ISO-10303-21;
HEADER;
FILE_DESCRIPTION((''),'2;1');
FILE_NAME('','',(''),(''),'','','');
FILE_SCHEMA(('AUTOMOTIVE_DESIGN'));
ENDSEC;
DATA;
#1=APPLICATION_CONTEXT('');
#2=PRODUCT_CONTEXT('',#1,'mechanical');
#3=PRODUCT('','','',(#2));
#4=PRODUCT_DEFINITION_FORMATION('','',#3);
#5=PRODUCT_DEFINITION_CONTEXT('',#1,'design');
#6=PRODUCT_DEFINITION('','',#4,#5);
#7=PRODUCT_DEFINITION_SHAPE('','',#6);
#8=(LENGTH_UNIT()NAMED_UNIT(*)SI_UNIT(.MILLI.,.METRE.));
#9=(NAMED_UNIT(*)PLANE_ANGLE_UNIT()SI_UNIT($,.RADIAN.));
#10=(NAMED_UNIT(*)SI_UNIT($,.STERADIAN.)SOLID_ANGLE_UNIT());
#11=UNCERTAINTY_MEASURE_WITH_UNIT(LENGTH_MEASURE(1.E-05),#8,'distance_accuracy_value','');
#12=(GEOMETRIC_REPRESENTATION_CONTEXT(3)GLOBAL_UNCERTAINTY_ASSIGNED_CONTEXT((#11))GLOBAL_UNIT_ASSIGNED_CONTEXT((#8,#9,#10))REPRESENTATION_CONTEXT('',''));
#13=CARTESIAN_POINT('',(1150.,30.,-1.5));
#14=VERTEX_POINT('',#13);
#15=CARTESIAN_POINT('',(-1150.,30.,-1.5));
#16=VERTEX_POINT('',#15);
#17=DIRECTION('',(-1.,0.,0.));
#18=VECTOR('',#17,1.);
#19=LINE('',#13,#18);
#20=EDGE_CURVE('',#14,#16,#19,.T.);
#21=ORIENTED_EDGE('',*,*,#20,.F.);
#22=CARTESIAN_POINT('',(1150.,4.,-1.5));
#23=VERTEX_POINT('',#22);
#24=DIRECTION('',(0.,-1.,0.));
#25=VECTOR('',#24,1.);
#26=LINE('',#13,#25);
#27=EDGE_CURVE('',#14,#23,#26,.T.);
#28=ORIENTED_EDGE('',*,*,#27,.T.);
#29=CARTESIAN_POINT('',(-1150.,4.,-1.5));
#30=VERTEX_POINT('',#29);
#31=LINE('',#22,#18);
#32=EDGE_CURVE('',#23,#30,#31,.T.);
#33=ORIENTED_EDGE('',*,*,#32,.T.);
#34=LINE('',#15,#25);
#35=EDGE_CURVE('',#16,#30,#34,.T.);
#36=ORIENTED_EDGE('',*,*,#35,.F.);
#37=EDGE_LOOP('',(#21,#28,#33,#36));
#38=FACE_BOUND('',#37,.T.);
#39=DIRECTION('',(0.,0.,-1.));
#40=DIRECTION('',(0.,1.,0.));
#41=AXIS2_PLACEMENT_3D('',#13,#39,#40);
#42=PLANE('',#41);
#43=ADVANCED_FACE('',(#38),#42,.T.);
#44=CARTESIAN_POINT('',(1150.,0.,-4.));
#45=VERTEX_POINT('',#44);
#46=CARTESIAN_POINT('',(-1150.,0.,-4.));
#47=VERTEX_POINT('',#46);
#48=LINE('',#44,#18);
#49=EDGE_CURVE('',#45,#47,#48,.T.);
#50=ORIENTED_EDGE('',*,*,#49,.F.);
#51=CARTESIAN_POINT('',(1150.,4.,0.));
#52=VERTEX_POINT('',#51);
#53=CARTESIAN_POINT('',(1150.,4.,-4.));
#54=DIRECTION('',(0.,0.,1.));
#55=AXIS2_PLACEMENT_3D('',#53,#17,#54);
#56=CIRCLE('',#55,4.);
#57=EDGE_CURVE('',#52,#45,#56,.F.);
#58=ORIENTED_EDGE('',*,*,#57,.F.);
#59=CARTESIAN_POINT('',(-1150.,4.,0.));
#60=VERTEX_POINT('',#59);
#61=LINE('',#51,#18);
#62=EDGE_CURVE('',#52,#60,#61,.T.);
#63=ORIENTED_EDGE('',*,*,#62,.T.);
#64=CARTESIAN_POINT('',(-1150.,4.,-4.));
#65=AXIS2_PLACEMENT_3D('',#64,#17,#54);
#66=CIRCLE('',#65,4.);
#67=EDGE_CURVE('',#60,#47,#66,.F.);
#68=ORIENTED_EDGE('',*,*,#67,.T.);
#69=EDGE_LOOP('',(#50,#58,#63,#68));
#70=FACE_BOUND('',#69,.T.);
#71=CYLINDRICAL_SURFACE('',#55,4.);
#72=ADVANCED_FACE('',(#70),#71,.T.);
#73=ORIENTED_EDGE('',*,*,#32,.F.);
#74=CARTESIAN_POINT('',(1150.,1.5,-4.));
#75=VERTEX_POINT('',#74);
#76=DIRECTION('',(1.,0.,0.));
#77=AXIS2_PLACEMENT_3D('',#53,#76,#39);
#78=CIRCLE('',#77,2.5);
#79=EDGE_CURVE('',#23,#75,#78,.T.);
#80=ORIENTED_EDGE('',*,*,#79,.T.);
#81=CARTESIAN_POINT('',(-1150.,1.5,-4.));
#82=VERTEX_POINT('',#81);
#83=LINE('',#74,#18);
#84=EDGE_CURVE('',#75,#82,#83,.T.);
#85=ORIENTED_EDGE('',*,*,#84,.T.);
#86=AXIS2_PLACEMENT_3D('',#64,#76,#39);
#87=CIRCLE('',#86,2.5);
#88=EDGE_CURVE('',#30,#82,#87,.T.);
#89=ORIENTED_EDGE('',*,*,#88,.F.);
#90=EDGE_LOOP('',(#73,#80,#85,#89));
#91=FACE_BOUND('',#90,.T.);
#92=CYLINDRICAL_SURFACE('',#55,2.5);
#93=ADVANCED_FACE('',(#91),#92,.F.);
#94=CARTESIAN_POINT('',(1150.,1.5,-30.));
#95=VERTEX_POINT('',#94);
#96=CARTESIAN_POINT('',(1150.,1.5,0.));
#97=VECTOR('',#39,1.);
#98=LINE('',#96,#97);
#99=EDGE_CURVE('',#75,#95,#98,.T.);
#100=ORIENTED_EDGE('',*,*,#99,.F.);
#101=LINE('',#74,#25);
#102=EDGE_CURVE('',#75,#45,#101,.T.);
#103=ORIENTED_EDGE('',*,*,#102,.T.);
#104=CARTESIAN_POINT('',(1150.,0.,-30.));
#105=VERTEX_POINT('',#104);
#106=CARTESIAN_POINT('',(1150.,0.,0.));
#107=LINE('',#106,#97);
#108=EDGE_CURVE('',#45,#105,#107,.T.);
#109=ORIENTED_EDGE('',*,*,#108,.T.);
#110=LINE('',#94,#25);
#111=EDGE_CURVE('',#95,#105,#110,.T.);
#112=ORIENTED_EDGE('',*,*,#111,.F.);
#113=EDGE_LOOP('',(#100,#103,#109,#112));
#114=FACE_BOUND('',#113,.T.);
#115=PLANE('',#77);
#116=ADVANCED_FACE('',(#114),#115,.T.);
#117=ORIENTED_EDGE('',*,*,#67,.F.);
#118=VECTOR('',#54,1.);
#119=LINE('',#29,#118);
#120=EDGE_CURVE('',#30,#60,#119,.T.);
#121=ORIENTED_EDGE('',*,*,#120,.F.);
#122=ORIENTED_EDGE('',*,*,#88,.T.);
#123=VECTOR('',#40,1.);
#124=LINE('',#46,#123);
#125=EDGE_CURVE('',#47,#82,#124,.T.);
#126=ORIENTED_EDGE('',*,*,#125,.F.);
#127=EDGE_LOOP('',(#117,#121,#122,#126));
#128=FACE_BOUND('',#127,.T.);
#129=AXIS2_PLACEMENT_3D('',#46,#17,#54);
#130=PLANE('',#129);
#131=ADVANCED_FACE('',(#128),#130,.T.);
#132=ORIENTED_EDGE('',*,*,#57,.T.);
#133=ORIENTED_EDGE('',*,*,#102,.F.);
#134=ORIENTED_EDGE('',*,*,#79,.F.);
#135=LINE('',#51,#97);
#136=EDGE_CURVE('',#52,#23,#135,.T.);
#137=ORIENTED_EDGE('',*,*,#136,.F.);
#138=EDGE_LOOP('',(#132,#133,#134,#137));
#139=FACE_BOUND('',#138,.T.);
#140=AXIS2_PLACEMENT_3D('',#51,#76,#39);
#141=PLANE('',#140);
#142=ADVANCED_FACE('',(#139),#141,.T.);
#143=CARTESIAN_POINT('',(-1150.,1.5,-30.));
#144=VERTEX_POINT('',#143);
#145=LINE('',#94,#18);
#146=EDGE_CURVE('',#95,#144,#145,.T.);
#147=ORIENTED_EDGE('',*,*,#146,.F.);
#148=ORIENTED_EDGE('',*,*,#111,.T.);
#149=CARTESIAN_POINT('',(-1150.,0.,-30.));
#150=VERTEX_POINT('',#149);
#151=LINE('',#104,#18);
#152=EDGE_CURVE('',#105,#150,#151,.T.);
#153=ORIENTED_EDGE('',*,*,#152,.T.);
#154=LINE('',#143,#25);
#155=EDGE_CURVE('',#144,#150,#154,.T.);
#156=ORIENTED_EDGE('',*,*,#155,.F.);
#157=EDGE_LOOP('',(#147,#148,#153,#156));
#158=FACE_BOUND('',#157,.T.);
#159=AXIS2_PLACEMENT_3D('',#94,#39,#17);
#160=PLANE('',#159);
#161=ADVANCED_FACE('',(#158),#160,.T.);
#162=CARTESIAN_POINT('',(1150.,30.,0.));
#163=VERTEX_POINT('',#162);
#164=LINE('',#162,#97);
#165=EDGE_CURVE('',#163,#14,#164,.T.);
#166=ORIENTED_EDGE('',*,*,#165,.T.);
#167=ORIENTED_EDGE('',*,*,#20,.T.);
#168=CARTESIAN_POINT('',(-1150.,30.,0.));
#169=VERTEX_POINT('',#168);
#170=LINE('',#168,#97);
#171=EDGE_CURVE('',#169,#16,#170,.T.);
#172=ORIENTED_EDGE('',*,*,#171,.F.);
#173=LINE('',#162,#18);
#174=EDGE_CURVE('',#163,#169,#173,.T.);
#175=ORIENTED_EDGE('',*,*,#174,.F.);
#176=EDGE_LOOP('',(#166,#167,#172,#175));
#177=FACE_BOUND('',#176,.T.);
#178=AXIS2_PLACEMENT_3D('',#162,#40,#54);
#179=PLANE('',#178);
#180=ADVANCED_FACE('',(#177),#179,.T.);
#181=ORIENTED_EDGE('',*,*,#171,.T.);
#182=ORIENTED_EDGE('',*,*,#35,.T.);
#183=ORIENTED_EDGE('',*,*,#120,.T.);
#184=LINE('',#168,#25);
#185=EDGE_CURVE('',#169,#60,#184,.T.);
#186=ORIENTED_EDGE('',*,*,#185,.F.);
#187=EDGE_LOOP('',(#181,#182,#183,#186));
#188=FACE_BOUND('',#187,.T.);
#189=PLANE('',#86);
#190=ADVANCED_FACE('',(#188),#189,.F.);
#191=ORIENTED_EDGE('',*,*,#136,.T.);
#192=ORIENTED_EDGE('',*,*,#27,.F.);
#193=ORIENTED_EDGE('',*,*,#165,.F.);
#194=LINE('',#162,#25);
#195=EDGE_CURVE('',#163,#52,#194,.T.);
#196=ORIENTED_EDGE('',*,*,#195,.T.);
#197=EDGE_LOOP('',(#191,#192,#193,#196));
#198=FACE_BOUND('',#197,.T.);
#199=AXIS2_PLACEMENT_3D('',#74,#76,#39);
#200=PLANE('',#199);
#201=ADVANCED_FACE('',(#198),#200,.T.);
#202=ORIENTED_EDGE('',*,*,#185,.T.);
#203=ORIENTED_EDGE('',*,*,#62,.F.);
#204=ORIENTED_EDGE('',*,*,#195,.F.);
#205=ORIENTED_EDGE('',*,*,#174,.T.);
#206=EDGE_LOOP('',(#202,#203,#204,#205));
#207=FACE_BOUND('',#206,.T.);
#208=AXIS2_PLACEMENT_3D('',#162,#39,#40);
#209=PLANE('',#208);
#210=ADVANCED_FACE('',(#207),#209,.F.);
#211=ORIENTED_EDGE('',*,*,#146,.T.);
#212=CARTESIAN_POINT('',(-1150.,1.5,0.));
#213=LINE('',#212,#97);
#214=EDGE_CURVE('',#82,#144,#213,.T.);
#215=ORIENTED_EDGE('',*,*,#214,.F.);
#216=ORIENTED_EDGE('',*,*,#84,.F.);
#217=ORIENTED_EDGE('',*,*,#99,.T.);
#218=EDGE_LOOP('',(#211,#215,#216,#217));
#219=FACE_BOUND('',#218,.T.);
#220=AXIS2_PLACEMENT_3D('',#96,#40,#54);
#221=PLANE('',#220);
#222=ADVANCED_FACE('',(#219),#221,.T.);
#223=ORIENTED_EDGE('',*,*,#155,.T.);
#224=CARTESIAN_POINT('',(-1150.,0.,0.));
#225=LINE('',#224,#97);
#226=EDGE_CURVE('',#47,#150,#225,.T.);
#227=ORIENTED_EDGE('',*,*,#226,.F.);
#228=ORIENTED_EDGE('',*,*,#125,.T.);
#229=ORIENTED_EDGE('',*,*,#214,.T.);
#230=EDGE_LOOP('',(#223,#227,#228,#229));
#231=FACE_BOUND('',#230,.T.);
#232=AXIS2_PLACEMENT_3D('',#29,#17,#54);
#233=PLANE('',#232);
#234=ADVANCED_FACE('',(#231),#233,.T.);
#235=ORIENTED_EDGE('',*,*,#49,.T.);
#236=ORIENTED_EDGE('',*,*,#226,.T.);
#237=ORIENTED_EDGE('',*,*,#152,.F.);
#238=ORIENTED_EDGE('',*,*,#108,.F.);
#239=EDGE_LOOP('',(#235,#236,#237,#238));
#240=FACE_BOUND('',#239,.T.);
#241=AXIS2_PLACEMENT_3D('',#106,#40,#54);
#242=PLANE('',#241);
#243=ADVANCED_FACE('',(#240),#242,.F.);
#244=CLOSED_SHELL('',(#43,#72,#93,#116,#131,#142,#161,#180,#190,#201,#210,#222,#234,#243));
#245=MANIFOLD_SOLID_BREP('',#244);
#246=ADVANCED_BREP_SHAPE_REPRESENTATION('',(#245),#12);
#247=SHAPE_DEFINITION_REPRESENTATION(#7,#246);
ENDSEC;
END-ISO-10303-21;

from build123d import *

# Parameters (mm, degrees)
BASE_FLANGE1_DEPTH = 1150


# Sheet-metal steps are written as plain solids
with BuildPart() as part:
    # Sketch1 → Base-Flange1 (new, symmetric)
    with BuildSketch(Plane(origin=(0, 0, 0), x_dir=(0, 0, -1), z_dir=(1, 0, 0))):
        with BuildLine():
            Line((0, 30), (0, 4))
            ThreePointArc((0, 4), (1.171572875, 1.171572875), (4, 0))
            Line((4, 0), (30, 0))
            Line((30, 0), (30, 1.5))
            Line((30, 1.5), (4, 1.5))
            ThreePointArc((4, 1.5), (2.232233047, 2.232233047), (1.5, 4))
            Line((1.5, 4), (1.5, 30))
            Line((1.5, 30), (0, 30))
        make_face()
    extrude(amount=BASE_FLANGE1_DEPTH, both=True)


solid = part.part
